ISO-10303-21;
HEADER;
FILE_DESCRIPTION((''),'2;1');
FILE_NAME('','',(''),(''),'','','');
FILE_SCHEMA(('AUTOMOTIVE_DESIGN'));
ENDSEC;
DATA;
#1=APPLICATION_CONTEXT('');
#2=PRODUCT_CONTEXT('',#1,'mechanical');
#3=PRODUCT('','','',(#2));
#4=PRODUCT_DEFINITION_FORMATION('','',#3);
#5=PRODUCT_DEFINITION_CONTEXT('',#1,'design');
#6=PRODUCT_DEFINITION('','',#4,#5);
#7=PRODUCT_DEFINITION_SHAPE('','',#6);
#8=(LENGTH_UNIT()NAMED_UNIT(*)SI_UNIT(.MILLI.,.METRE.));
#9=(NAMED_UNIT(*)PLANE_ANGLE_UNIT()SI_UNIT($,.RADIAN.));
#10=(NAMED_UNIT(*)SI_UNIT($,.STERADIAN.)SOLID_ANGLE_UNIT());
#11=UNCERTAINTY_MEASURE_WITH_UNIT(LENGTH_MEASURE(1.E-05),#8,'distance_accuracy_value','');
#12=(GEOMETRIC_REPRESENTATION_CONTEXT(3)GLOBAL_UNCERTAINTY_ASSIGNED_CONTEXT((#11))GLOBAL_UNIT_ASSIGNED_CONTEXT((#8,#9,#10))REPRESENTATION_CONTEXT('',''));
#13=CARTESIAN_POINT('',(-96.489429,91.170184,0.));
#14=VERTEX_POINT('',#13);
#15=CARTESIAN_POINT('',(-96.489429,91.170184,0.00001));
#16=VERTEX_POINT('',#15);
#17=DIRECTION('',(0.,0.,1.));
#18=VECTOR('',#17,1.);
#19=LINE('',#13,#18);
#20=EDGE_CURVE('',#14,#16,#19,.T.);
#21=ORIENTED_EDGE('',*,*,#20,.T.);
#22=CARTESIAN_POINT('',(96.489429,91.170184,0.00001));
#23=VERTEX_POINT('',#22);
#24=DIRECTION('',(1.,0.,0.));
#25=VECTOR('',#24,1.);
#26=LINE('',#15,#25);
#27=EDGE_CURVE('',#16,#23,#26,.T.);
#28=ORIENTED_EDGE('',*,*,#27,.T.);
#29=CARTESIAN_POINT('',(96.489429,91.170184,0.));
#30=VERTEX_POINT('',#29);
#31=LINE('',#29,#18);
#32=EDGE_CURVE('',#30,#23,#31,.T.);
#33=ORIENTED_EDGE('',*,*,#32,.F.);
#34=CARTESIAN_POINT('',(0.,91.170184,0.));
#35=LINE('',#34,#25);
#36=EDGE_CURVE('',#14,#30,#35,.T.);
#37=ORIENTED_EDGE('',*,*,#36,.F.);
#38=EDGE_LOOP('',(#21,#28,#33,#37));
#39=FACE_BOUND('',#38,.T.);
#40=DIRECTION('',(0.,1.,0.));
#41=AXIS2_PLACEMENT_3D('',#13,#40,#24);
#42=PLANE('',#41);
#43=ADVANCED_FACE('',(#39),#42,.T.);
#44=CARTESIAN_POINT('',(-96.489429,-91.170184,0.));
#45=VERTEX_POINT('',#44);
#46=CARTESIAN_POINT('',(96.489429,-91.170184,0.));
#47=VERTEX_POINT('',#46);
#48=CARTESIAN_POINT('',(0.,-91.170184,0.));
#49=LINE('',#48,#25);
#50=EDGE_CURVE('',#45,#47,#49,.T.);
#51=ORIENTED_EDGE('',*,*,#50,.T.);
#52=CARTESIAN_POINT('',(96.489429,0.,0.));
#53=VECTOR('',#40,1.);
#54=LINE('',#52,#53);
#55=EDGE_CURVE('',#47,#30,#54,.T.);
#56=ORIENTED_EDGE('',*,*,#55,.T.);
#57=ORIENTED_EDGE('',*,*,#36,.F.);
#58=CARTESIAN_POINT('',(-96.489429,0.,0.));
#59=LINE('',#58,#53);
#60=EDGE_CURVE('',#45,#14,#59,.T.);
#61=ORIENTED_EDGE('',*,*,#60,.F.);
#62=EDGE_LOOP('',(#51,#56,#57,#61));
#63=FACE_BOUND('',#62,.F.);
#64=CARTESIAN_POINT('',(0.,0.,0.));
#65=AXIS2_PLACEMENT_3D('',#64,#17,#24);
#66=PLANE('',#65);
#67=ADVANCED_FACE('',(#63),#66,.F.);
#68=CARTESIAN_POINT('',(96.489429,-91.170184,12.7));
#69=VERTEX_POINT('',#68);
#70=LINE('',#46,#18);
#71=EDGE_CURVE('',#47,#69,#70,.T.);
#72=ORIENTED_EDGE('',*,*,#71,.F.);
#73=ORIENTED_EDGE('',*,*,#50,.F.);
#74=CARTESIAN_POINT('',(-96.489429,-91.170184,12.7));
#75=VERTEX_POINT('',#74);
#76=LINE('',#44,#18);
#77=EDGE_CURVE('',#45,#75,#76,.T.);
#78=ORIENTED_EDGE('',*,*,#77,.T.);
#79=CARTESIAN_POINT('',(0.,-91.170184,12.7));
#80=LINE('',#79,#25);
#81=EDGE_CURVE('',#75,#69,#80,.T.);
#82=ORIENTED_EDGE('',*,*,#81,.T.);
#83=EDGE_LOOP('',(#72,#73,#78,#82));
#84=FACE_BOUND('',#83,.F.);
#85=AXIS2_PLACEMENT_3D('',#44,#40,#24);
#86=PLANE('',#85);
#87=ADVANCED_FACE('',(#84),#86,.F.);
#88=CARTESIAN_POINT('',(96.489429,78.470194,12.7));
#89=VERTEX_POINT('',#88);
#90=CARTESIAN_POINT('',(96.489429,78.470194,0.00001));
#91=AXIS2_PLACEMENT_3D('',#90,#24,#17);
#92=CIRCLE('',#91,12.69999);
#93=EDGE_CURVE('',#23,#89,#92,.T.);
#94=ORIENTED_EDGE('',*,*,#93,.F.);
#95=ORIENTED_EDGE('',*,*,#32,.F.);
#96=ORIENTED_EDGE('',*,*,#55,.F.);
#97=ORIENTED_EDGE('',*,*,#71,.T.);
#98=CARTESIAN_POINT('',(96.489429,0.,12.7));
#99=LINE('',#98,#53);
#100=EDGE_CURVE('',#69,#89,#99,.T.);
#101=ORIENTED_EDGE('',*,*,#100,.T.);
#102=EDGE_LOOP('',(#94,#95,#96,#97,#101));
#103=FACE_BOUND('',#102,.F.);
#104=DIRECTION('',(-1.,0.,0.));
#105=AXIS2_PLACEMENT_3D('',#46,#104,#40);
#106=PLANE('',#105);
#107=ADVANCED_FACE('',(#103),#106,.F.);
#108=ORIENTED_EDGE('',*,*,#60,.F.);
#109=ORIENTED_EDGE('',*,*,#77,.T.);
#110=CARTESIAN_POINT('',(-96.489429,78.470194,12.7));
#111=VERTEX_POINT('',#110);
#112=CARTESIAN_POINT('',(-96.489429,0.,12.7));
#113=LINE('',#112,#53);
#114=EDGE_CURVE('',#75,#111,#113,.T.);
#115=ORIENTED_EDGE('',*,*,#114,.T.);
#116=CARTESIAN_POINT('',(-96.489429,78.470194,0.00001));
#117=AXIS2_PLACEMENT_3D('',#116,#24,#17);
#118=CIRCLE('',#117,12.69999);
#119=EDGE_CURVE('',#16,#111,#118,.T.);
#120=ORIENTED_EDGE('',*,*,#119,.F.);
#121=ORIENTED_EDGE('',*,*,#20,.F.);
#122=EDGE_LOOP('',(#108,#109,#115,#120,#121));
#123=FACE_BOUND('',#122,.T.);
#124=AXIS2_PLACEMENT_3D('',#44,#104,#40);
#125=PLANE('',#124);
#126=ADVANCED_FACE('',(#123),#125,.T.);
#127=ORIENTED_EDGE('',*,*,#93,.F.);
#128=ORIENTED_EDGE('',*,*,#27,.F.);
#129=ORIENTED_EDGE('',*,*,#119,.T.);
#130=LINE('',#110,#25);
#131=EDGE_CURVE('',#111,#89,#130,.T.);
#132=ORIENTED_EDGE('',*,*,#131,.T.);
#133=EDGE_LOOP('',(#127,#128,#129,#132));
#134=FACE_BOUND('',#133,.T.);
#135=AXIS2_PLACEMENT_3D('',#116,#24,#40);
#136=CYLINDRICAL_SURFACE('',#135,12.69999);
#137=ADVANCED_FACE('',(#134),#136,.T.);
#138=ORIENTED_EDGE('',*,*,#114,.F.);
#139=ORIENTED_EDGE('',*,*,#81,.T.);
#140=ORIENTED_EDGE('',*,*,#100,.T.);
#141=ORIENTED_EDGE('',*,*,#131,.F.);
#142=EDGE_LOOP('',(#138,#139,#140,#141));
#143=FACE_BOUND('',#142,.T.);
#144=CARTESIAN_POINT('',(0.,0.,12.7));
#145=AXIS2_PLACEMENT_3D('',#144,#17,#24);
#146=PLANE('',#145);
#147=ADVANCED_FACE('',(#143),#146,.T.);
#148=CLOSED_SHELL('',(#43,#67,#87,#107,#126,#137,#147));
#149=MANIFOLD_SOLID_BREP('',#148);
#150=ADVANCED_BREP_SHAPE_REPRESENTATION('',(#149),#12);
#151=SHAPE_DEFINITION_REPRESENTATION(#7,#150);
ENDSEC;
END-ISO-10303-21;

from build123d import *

# Parameters (mm, degrees)
F0_W     = 192.9788589478
F0_H     = 182.3403686285
F1_DEPTH = 12.7
F4_R     = 12.69999


# Not quite as in the source:
# - a fillet or chamfer is up to 0.001 mm smaller than in the source, because OpenCascade refuses the exact size
# - the program builds the solid bodies; features that only make, move or delete a surface that nothing else refers to are left out


with BuildPart() as f1:
    # F0 (on Top) → F1 (new body)
    with BuildSketch(Plane.XY):
        Rectangle(F0_W, F0_H)
    extrude(amount=F1_DEPTH)

    # F4 (radius 12.7 in the source; OpenCascade refuses exactly that, so slightly less here)
    f4_edges = [f1.edges().sort_by_distance(p)[0] for p in [
        (0, 91.170184, 12.7),
    ]]
    fillet(f4_edges, radius=F4_R)


solid = f1.part
